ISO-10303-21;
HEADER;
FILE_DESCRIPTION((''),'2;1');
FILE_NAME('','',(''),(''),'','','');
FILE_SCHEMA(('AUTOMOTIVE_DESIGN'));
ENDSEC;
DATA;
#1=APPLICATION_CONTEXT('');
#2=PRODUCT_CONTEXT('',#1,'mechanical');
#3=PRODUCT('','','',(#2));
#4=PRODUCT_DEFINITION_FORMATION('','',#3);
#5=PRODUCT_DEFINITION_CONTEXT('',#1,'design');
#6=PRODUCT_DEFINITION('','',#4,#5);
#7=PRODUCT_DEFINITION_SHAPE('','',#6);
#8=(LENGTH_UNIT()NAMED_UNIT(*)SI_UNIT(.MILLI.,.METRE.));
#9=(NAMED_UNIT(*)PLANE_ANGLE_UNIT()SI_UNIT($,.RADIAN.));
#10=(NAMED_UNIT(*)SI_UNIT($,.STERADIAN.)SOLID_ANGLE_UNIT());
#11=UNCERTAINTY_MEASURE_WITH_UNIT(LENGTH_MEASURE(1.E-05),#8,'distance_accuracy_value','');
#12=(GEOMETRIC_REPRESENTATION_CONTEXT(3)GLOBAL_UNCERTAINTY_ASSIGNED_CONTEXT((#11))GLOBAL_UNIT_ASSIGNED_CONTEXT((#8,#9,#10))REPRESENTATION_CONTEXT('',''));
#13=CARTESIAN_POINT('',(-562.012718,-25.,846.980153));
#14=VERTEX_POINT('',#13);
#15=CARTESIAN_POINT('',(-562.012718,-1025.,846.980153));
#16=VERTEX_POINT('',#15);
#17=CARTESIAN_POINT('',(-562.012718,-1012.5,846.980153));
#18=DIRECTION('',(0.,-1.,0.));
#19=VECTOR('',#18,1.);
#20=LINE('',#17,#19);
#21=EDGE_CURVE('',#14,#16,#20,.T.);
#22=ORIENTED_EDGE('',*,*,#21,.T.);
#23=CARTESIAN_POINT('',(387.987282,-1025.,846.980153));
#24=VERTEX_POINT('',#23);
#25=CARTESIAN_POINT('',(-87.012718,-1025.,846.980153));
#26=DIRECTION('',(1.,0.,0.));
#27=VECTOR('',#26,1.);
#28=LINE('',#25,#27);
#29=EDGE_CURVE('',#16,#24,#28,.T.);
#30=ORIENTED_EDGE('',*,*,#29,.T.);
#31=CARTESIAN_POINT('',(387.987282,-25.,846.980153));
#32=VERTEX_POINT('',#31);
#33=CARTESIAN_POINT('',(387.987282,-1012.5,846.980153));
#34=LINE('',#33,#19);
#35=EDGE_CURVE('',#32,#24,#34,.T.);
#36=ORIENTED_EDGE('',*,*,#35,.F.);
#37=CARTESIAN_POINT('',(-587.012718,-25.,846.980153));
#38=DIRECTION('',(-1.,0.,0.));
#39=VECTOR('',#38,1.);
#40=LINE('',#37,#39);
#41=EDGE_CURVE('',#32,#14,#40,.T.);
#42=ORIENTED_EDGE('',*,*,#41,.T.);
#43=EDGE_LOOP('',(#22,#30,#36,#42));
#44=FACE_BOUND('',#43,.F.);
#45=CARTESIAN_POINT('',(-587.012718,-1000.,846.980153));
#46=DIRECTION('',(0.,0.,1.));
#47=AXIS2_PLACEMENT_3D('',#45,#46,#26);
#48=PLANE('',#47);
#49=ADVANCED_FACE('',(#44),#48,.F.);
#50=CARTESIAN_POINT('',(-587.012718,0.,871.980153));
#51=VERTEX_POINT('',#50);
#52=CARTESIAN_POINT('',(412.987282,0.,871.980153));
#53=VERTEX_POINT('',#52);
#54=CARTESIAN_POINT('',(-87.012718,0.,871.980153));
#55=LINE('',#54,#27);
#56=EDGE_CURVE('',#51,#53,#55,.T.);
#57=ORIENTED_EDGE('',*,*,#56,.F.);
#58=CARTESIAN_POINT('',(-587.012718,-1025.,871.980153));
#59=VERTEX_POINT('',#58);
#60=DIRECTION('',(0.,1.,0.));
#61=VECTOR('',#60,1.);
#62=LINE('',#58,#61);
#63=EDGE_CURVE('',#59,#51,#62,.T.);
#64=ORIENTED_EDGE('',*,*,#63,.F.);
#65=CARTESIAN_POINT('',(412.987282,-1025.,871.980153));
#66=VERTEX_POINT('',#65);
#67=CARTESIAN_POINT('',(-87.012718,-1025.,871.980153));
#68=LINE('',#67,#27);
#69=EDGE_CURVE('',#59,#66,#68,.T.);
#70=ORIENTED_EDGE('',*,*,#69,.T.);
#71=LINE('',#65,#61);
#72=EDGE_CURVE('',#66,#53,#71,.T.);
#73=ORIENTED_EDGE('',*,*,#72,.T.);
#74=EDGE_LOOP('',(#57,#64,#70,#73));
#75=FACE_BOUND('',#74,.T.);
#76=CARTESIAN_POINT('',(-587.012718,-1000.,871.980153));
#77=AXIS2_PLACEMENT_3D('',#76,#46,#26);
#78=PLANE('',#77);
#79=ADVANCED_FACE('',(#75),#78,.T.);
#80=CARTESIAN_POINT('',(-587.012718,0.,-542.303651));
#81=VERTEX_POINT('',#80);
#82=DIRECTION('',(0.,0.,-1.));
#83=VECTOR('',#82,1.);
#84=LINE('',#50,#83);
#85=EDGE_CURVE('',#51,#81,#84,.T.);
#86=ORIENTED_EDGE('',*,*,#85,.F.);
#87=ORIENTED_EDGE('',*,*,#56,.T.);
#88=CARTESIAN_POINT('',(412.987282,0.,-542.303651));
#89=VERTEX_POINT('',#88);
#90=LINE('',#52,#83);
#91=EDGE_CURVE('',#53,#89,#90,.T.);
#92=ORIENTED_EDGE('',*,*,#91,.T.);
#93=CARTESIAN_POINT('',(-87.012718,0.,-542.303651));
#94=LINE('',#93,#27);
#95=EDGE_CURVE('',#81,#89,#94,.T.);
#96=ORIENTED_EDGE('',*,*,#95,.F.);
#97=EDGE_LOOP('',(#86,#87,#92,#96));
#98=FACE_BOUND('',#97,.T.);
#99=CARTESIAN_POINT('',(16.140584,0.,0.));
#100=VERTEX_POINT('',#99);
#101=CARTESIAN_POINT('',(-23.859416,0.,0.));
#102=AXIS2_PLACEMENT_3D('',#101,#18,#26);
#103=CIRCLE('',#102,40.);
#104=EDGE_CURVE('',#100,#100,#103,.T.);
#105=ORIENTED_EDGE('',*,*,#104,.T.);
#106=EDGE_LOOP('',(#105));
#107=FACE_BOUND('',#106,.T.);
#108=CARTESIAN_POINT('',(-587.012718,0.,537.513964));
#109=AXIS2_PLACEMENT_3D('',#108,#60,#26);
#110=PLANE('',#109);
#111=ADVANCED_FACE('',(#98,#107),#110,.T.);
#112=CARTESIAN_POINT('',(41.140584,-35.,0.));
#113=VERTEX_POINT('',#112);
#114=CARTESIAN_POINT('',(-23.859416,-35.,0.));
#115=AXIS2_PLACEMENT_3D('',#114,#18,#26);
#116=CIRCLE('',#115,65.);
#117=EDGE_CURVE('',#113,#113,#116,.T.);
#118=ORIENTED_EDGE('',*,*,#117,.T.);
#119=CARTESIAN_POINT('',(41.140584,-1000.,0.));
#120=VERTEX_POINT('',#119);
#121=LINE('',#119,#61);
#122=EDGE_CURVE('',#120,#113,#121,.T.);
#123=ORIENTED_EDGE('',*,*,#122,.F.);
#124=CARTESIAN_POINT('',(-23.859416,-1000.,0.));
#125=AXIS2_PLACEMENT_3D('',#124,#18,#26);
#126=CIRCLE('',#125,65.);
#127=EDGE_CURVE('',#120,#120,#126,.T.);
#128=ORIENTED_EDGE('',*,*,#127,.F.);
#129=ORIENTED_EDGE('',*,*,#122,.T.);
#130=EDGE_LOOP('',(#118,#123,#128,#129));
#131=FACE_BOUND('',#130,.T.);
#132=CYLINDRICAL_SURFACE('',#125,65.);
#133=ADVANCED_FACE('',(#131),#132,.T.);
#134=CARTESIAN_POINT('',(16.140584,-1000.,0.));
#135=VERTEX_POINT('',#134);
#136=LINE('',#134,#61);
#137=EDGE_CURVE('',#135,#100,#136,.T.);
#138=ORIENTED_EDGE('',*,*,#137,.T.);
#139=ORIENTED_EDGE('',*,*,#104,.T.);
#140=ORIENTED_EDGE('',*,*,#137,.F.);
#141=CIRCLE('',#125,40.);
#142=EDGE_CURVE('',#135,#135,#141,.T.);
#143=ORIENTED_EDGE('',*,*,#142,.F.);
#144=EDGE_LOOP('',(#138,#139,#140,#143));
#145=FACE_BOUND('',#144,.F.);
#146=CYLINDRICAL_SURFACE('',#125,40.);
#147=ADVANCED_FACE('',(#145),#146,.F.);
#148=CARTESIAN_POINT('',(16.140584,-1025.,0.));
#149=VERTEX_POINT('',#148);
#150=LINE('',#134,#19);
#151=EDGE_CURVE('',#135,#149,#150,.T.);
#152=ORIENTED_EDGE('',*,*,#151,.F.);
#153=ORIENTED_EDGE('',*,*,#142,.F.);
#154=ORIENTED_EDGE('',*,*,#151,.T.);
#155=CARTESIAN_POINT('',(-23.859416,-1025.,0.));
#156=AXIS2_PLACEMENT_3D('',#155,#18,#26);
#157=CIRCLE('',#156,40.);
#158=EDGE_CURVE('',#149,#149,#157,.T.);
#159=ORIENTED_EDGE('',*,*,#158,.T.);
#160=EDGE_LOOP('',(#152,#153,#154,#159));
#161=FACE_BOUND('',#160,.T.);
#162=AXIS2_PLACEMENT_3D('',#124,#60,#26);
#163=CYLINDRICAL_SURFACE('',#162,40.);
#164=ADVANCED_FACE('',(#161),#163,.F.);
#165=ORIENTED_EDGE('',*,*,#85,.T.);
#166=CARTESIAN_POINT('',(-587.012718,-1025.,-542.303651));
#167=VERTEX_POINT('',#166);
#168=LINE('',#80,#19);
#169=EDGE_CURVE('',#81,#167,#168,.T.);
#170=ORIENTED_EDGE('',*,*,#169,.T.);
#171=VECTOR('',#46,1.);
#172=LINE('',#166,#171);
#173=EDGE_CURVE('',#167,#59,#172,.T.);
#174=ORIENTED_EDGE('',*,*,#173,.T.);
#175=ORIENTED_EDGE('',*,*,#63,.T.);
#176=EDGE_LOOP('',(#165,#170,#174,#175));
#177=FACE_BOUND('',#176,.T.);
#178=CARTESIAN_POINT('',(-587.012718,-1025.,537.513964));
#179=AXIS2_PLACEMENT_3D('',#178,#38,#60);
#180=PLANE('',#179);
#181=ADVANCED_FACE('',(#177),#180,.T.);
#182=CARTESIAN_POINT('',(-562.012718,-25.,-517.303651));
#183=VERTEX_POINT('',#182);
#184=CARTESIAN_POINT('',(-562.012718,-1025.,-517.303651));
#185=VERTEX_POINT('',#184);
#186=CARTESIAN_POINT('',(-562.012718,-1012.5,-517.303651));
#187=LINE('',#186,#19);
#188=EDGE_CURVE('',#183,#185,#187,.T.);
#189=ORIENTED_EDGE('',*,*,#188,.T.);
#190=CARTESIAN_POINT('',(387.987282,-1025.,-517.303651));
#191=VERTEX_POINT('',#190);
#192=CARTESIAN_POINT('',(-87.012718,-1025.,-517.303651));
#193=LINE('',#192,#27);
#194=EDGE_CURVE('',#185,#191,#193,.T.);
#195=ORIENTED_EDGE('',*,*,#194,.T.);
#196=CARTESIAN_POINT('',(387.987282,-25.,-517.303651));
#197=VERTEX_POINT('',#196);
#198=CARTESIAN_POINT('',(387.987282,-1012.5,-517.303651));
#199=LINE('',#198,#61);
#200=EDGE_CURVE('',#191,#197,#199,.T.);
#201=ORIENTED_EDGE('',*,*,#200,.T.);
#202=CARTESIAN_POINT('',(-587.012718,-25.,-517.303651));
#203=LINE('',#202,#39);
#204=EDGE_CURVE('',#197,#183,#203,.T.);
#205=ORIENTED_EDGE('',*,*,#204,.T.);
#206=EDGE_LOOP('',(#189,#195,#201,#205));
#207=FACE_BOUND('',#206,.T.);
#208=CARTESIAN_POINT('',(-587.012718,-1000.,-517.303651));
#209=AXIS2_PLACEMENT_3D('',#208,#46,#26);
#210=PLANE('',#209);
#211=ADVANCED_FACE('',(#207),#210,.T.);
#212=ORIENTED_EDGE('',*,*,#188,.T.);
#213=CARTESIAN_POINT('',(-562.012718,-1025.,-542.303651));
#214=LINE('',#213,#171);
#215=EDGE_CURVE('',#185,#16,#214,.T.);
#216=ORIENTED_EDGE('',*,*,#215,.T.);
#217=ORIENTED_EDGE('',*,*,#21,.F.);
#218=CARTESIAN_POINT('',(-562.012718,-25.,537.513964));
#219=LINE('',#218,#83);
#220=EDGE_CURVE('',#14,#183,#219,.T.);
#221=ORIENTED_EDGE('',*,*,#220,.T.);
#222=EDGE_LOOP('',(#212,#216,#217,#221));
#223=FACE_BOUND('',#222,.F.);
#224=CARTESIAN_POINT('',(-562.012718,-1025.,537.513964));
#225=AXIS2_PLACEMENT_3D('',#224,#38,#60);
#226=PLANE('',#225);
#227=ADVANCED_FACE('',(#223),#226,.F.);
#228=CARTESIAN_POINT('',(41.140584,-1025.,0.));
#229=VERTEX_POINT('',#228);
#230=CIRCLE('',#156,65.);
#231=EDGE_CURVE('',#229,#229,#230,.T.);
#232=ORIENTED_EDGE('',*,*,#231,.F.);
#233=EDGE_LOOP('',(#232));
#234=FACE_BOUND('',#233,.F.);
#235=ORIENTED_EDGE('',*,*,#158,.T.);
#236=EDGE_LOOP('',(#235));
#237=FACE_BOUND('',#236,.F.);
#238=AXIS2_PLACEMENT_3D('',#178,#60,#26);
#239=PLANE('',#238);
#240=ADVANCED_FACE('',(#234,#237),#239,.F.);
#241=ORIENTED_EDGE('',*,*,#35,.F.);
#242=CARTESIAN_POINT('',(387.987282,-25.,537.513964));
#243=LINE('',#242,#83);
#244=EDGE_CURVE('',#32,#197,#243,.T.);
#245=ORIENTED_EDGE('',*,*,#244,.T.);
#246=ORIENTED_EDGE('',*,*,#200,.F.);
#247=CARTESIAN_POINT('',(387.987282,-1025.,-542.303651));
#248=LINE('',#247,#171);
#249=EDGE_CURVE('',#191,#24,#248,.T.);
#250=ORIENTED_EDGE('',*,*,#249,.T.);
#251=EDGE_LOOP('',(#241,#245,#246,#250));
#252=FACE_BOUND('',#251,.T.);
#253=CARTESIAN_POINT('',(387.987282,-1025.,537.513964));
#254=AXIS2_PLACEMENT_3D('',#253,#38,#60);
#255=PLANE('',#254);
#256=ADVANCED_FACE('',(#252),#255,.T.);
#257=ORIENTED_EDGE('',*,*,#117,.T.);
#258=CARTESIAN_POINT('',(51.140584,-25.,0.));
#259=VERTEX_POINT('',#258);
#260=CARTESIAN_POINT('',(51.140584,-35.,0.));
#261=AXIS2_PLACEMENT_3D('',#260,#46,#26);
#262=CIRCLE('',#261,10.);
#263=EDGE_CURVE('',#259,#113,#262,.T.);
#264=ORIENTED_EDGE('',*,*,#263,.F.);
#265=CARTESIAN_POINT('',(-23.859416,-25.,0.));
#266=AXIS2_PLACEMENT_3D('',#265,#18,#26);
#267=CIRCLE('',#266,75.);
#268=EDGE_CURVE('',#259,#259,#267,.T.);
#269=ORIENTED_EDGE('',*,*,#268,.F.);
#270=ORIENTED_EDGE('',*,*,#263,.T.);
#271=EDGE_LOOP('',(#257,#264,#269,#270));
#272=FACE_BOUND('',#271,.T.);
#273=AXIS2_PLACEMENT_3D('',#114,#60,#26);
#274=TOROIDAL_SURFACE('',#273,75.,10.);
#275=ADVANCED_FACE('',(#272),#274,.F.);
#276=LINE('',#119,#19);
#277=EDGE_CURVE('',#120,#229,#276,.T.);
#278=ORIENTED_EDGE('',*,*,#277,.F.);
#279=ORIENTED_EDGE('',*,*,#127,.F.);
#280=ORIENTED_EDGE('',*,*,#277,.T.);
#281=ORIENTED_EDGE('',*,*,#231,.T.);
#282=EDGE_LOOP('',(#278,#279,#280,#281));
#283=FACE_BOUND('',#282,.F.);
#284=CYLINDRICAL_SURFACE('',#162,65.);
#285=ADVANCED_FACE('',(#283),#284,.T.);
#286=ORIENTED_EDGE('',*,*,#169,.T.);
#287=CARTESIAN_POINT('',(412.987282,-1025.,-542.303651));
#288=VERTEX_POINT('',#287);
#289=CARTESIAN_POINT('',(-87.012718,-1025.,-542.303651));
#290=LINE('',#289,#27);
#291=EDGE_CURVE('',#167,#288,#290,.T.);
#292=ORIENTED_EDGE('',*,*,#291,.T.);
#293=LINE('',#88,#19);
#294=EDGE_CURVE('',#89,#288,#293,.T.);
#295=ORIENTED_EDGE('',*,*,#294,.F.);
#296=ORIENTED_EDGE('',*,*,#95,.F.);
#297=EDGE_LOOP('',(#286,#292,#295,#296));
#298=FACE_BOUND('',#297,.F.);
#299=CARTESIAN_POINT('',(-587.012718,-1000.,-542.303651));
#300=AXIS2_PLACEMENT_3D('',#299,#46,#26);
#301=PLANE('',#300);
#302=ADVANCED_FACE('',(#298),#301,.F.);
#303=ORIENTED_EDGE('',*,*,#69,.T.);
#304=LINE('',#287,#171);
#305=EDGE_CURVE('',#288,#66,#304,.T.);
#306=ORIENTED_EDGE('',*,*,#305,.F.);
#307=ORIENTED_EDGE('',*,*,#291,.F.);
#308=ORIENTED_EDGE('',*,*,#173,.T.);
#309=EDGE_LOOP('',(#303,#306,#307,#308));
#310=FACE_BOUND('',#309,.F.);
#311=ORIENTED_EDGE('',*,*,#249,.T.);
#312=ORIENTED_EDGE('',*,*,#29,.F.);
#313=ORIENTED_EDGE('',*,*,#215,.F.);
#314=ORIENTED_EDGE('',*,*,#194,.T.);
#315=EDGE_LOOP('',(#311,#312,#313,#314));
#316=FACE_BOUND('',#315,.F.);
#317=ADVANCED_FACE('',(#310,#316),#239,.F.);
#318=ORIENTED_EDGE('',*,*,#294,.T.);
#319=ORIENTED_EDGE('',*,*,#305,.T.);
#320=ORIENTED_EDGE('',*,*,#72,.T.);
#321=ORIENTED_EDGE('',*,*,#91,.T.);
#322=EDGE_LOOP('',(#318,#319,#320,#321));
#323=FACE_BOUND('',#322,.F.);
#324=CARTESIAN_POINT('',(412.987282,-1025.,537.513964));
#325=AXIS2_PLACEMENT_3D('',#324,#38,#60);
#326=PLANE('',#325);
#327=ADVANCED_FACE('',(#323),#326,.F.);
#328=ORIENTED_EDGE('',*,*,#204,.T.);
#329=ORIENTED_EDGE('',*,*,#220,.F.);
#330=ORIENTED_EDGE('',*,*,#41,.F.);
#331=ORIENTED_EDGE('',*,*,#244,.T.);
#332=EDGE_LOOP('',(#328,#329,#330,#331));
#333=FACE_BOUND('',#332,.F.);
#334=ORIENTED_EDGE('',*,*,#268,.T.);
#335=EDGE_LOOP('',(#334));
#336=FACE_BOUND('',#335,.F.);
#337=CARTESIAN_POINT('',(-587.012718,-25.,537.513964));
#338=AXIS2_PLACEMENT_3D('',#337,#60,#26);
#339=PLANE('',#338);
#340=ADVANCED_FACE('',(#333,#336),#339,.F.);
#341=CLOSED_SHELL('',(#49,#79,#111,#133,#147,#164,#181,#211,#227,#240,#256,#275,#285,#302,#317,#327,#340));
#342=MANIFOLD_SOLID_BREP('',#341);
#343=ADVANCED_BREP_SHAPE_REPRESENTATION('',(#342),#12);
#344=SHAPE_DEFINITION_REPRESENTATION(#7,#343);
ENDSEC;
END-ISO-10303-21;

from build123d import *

# Parameters (mm, degrees)
F0_W     = 1000
F0_H     = 1079.8176152468
F1_DEPTH = 1000
F2_R     = 40
F3_DEPTH = 1463.3684158325
F4_DEPTH = 25
F5_DEPTH = 334.466189146
F6_T     = -25
F7_R     = 10


with BuildPart() as f1:
    # F0 (on Front) → F1 (new body)
    with BuildSketch(Plane.XZ):
        with Locations((-87.0127184317, -2.3948438466)):
            Rectangle(F0_W, F0_H)
    extrude(amount=F1_DEPTH)

    # F2 (on face) → F3 (cut)
    with BuildSketch(Plane.XZ.offset(1000)):
        with Locations((-23.8594158151, 0)):
            Circle(F2_R)
    extrude(amount=-F3_DEPTH, mode=Mode.SUBTRACT)

    # F4 (add): a face of the model
    f4_faces = [f1.faces().sort_by_distance(p)[0] for p in [
        (-87.3080717633, -1000, -2.4060439751),
    ]]
    extrude(f4_faces, amount=F4_DEPTH)

    # F5 (add): a face of the model
    f5_faces = [f1.faces().sort_by_distance(p)[0] for p in [
        (-87.0127184317, -512.5, 537.5139637768),
    ]]
    extrude(f5_faces, amount=F5_DEPTH)

    # F6
    f6_openings = [f1.faces().sort_by_distance(p)[0] for p in [
        (-87.237974, -1025, 165.426197),
    ]]
    offset(amount=F6_T, openings=f6_openings)

    # F7
    f7_edges = [f1.edges().sort_by_distance(p)[0] for p in [
        (-88.859416, -25, 0),
    ]]
    fillet(f7_edges, radius=F7_R)


solid = f1.part
